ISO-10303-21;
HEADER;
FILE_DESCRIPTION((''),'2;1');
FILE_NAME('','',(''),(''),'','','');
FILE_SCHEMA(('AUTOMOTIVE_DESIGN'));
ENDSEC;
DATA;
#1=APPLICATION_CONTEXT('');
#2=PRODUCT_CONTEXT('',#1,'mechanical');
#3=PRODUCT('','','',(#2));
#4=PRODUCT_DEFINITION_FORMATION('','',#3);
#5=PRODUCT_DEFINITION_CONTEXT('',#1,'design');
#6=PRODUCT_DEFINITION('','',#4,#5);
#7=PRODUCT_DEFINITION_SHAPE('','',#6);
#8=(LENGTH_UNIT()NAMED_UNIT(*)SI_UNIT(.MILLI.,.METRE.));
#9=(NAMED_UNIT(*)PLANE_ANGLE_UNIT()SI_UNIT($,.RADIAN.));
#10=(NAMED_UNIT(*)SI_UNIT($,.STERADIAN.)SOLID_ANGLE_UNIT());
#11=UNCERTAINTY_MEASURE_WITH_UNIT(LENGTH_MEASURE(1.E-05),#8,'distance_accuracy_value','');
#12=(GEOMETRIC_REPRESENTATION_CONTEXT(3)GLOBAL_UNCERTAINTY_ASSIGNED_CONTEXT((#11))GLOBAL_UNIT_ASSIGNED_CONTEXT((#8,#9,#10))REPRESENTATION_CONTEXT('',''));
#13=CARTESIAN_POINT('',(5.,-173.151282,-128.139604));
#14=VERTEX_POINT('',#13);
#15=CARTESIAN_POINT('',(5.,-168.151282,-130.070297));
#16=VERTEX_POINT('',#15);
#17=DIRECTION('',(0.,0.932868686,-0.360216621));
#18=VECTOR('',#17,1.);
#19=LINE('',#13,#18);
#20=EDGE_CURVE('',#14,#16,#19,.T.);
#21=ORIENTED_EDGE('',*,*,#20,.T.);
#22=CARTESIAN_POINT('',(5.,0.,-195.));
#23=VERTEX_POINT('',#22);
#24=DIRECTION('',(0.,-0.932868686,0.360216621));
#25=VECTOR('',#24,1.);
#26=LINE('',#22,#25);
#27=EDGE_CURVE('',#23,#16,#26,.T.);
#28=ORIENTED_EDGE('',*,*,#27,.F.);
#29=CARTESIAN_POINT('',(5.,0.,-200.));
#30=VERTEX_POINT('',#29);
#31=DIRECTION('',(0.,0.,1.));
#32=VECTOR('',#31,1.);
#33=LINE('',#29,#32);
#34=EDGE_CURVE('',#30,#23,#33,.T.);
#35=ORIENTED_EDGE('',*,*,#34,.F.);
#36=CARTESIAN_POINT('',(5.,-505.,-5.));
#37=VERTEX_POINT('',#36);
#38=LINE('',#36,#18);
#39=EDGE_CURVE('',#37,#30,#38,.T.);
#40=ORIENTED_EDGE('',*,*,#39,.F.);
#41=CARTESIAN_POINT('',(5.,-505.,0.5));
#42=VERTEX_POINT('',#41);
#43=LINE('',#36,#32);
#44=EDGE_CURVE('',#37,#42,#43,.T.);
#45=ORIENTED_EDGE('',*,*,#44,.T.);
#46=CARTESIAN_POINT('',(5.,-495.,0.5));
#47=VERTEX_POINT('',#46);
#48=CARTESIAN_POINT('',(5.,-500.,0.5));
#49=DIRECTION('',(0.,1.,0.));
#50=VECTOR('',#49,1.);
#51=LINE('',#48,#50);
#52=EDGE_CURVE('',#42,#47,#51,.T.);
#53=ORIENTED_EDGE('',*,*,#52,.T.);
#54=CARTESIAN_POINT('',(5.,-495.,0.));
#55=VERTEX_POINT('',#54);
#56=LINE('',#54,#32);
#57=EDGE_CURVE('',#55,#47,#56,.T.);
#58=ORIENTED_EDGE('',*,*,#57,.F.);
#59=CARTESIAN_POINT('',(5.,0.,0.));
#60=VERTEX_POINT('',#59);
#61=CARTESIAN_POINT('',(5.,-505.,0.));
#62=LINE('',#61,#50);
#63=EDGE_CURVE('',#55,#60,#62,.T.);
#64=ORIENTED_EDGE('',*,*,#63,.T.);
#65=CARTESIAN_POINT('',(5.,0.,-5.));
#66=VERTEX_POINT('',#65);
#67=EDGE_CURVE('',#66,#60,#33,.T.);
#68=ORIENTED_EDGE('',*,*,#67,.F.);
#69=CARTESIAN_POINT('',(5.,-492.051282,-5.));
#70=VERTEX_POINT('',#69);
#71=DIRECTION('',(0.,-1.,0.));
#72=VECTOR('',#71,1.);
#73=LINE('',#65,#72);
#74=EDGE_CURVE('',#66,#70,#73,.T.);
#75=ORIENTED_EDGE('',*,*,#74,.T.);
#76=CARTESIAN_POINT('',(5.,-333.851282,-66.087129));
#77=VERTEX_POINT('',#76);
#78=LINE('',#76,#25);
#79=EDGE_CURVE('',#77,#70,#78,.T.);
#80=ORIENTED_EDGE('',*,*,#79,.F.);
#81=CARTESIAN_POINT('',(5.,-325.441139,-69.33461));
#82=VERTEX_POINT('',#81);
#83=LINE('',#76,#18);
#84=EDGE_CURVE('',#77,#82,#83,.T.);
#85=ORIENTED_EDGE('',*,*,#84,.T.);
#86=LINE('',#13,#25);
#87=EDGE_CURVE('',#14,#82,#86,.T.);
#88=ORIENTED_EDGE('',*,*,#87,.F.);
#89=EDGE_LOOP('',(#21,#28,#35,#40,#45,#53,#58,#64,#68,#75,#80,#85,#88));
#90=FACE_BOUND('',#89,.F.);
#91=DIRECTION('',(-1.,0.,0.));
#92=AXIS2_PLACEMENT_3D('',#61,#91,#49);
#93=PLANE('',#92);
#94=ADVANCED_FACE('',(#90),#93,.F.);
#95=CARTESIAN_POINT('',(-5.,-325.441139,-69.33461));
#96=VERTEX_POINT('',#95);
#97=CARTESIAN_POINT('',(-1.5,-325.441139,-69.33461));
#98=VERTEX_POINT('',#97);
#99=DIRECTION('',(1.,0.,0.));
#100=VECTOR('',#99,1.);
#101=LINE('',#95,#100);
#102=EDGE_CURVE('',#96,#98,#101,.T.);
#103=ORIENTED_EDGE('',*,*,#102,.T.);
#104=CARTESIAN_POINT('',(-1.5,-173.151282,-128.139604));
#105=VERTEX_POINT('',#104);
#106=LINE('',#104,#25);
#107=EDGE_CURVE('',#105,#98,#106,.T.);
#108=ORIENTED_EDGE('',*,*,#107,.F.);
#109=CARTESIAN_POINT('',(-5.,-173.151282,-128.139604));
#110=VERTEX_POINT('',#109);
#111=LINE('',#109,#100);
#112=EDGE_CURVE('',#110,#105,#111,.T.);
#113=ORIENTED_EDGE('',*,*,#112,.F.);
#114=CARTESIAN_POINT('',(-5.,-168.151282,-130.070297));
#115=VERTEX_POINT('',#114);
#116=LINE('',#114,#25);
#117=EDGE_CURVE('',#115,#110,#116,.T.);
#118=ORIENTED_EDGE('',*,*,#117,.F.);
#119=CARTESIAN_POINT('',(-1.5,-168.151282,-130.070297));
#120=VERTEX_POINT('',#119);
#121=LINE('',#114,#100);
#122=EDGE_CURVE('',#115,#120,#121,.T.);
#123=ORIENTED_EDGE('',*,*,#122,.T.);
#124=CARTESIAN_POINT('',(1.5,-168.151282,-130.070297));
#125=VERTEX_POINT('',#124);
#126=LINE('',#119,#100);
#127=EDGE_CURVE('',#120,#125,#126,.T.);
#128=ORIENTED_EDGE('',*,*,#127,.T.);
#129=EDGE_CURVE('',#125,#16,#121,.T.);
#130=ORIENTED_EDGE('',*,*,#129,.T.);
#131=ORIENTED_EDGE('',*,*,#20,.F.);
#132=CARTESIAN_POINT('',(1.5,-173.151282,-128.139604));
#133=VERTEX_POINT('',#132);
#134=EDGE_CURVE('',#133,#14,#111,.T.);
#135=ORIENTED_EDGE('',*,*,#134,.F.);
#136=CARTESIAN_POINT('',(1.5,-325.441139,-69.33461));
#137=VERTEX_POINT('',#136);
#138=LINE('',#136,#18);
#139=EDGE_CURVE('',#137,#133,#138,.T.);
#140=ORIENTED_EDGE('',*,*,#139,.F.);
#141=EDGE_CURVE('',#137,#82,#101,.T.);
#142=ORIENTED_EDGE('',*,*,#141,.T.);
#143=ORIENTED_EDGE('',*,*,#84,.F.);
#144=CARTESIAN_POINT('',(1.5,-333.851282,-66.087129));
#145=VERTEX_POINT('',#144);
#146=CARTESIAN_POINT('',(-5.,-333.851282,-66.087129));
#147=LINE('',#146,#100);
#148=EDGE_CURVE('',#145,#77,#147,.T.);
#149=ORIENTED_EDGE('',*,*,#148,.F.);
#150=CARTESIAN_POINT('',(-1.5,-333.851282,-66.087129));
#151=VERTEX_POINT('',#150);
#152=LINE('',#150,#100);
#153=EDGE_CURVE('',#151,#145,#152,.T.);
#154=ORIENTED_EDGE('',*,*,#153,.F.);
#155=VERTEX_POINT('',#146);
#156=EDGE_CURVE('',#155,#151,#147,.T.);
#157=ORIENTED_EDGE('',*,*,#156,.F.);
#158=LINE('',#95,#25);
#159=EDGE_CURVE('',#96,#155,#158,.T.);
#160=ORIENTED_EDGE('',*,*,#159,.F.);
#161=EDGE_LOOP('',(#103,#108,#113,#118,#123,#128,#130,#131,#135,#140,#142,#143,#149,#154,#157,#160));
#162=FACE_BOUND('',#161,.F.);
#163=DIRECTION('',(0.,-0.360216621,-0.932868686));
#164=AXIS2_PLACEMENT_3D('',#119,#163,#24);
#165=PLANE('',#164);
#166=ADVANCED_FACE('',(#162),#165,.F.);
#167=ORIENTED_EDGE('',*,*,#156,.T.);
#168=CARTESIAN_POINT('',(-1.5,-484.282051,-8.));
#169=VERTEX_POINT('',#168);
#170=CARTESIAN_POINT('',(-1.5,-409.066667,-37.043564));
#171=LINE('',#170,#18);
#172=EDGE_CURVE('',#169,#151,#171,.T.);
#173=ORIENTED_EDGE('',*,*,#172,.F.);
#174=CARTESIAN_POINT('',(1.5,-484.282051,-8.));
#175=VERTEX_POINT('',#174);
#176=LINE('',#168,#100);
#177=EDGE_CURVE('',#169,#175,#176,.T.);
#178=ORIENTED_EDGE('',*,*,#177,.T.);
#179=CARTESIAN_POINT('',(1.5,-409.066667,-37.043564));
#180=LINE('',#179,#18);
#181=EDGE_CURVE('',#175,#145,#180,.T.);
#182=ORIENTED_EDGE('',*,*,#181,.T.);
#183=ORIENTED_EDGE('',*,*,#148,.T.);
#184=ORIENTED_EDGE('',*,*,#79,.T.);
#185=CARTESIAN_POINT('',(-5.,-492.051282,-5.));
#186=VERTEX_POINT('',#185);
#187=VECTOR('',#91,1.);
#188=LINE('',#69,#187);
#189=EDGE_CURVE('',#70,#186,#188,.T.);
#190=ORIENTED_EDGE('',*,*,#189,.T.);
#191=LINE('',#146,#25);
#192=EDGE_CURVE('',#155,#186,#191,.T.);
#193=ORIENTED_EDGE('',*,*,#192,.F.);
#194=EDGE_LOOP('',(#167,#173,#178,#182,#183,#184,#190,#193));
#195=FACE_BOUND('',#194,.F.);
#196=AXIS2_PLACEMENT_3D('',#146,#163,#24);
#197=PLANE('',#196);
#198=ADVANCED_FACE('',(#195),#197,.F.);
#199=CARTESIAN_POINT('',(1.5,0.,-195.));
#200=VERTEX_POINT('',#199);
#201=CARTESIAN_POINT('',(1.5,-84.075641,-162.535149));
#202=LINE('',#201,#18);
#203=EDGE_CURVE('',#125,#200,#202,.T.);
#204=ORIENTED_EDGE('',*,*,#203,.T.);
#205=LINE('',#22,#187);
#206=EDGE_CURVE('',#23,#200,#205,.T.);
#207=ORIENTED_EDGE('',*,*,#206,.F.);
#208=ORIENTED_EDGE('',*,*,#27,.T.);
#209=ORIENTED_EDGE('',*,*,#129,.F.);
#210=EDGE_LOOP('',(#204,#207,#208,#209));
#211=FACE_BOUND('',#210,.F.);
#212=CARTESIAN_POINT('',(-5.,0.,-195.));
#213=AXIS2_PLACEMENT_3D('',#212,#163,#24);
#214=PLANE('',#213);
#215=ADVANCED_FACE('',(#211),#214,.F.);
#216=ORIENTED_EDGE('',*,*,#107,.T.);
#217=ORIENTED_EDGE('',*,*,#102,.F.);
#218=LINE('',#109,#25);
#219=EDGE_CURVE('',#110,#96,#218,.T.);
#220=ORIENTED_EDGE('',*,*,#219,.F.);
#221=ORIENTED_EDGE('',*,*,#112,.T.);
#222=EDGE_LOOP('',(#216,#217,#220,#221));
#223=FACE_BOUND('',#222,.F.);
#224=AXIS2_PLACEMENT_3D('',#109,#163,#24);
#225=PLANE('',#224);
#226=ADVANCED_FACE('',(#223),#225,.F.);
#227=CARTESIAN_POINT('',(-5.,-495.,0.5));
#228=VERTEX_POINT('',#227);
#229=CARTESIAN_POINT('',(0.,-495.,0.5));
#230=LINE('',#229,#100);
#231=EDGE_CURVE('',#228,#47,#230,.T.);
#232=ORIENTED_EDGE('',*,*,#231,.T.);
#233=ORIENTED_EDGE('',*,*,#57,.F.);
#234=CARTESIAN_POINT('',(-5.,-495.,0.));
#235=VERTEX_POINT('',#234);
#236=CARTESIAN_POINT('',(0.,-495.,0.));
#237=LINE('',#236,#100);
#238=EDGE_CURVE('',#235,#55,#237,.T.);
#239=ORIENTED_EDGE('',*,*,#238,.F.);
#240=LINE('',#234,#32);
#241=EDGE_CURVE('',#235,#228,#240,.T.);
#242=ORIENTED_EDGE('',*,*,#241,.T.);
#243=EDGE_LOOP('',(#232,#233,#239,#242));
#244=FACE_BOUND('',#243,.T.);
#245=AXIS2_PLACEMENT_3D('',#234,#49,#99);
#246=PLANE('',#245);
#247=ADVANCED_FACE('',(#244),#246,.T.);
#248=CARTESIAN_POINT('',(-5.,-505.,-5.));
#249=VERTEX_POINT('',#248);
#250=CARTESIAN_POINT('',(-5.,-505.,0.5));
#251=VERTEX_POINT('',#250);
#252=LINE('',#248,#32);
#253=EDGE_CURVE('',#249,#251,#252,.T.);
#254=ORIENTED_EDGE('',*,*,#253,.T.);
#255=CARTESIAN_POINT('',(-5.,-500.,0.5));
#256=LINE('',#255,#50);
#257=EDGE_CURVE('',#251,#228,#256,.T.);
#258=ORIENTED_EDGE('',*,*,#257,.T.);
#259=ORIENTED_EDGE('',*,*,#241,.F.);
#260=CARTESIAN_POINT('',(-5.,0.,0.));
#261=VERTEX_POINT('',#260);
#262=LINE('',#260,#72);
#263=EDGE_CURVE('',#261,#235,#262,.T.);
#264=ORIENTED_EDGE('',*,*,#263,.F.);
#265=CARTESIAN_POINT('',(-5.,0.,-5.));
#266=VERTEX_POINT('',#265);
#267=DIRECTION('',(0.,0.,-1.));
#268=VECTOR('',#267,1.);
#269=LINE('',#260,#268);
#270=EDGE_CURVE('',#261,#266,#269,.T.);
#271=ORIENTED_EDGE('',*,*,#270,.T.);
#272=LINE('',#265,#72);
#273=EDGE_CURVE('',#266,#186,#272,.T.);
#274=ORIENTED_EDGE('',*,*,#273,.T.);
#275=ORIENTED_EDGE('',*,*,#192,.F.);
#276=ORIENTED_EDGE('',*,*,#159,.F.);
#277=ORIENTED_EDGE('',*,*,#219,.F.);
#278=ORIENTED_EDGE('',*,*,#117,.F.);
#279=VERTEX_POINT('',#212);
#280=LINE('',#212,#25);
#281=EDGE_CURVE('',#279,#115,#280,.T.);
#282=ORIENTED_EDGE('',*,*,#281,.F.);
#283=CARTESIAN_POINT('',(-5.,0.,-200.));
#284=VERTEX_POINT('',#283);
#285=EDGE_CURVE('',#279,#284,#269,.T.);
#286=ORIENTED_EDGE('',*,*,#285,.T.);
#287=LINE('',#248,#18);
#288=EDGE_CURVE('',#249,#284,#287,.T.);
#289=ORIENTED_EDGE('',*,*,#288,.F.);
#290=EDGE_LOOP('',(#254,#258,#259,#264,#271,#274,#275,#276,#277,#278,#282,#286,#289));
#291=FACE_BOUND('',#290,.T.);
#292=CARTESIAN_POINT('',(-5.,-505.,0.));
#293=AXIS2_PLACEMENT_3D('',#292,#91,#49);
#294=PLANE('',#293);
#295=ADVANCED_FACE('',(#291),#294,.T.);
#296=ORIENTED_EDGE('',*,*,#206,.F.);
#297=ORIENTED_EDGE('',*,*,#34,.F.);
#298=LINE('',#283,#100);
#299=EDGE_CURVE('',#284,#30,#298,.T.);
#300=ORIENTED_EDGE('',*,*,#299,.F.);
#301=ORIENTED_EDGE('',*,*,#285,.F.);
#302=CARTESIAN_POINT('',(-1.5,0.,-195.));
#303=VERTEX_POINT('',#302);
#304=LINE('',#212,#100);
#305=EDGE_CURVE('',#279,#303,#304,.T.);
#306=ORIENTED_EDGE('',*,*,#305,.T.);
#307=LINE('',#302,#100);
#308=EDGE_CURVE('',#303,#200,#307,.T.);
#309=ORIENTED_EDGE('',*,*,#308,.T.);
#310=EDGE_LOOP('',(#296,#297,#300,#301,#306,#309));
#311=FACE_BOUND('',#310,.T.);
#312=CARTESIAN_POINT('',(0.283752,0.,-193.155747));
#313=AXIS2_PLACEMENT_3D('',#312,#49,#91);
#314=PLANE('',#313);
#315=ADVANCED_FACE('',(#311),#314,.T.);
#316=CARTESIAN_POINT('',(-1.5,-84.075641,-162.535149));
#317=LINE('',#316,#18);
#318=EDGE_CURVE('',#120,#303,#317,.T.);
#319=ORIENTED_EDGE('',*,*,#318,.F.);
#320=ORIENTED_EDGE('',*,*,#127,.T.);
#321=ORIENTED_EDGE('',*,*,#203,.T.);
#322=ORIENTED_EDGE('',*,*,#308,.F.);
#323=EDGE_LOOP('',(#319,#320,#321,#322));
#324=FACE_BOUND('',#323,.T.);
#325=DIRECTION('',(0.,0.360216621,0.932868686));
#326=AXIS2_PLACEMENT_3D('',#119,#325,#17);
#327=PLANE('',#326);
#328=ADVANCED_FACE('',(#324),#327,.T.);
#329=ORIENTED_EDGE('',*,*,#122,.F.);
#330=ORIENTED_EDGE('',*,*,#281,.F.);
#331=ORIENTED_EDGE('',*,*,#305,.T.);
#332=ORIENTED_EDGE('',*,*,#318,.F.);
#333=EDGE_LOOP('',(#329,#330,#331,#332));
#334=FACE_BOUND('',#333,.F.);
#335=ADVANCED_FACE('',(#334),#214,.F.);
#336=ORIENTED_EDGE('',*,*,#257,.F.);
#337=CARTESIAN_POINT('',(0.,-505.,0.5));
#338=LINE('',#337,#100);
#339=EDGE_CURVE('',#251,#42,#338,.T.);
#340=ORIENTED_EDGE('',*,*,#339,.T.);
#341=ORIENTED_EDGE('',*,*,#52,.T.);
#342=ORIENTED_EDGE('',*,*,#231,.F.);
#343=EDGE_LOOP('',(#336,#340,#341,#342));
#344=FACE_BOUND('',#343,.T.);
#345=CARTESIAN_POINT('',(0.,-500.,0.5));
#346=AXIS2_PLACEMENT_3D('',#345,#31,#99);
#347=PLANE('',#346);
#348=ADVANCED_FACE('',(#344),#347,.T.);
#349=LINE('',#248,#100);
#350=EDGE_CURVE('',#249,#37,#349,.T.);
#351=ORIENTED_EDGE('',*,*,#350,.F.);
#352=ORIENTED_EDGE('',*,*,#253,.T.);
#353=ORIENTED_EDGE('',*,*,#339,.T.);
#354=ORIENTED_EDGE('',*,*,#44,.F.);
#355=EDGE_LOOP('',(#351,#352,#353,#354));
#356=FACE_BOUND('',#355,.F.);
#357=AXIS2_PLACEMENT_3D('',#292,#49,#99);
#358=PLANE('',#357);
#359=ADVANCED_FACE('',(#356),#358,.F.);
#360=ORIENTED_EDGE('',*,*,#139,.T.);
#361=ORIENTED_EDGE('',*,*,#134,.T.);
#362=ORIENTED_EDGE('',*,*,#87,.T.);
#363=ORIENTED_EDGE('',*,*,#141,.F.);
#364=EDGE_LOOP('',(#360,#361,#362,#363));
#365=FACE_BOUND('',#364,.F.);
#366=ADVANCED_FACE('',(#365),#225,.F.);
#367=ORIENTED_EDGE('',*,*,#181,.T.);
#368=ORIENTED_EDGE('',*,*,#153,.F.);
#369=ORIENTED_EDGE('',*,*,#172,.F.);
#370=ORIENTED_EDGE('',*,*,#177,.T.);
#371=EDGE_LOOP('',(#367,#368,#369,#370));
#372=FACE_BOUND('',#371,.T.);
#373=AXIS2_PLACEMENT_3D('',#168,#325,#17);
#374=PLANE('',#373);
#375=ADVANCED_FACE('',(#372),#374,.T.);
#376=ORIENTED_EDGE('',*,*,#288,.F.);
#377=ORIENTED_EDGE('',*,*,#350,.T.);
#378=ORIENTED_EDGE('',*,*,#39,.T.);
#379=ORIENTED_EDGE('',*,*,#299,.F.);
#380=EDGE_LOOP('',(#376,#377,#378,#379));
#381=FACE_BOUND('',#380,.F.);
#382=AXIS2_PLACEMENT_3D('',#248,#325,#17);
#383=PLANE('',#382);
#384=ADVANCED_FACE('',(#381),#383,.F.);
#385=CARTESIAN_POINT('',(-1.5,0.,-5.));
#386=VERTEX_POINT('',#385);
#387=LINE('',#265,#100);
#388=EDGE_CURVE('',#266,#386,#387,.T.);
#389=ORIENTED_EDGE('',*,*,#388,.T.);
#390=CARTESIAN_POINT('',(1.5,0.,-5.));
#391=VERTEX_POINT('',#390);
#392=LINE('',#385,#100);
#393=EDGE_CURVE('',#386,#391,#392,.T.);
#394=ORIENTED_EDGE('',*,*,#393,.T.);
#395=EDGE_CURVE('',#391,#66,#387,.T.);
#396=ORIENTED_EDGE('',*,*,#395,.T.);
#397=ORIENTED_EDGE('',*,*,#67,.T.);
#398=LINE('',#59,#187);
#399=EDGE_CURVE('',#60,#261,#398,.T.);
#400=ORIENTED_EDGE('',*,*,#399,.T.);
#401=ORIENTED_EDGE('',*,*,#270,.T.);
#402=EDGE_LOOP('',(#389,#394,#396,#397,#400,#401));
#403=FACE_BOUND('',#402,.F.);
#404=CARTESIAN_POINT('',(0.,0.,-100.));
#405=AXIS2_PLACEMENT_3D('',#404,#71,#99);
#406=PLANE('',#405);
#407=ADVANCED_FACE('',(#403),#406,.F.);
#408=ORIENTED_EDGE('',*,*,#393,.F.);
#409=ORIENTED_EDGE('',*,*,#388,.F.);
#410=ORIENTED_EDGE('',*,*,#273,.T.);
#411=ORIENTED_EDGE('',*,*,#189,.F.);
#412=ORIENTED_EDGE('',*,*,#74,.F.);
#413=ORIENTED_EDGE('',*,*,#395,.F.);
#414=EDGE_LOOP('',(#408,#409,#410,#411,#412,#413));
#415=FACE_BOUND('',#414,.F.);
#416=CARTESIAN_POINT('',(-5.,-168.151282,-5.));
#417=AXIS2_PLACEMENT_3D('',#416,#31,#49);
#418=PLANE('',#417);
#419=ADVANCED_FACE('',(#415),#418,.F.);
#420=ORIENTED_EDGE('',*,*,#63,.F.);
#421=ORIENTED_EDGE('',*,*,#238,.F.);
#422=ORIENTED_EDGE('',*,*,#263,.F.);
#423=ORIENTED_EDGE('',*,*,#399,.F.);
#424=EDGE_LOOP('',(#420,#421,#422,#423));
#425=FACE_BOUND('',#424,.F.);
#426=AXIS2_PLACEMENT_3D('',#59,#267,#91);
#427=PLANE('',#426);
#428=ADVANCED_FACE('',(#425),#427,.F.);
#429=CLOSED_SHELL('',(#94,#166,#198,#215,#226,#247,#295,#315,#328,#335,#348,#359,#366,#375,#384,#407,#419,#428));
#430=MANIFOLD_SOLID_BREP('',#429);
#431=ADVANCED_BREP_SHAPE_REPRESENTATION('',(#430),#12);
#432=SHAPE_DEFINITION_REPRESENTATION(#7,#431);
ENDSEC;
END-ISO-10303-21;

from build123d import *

# Parameters (mm, degrees)
F1_DEPTH  = 505
F2_DEPTH  = 500.5
F4_DEPTH  = 10
F5_DEPTH  = 10
F7_DEPTH  = 3.5
F8_W      = 10
F8_H      = 10
F10_DEPTH = 0.5
F11_DEPTH = 3.5
F12_W     = 3
F12_H     = 158.2
F12_H_2   = 149.0364306936
F12_H_3   = 168.1512820513
F13_DEPTH = 3
F14_W     = 3
F14_H     = 180.2518238002
F14_H_2   = 163.2489754916
F14_H_3   = 161.2561033061
F15_DEPTH = 3
F16_DEPTH = 40
F17_W     = 5.5675039161
F17_H     = 3.688506484
F18_DEPTH = 25
F19_DEPTH = 25


with BuildPart() as f1:
    # F0 (on Front) → F1 (new body)
    with BuildSketch(Plane.XZ):
        Polygon((5, 0), (0, 0), (-5, 0), (-5, -200), (5, -200), align=None)
    extrude(amount=F1_DEPTH)

    # F0 (on Front) → F2 (join)
    with BuildSketch(Plane.XZ):
        Polygon((5, 0), (0, 0), (-5, 0), (-5, -200), (5, -200), align=None)
    extrude(amount=F2_DEPTH)

    # F3 (on face) → F4 (cut, through all)
    with BuildSketch(Plane(origin=(-5, 0, 0), x_dir=(0, -1, 0), z_dir=(-1, 0, 0))):
        Polygon((328.8512820513, -65.3208171387), (328.8512820513, -5), (179.8148513577, -5), align=None)
        Polygon((173.1512820513, -128.1396039604), (325.4411393395, -69.334609562), (173.1512820513, -7.6970046434), align=None)
        Polygon((168.1512820513, -5), (0, -5), (0, -195), (168.1512820513, -130.0702970297), align=None)
        Polygon((333.8512820513, -66.0871287129), (492.0512820513, -5), (333.8512820513, -5), align=None)
    extrude(amount=-F4_DEPTH, mode=Mode.SUBTRACT)

    # F3 (on face) → F5 (cut, through all)
    with BuildSketch(Plane(origin=(-5, 0, 0), x_dir=(0, -1, 0), z_dir=(-1, 0, 0))):
        Polygon((505, -200), (505, -5), (331.3512820513, -72.0524752475), (0, -200), align=None)
    extrude(amount=-F5_DEPTH, mode=Mode.SUBTRACT)

    # F6 (on face) → F7 (cut)
    with BuildSketch(Plane(origin=(-5, 0, 0), x_dir=(0, -1, 0), z_dir=(-1, 0, 0))):
        Polygon((179.8148513577, -5), (168.1512820513, -5), (168.1512820513, -130.0702970297), (173.1512820513, -128.1396039604), (173.1512820513, -7.6970046434), (325.4411393395, -69.334609562), (333.8512820513, -66.0871287129), (333.8512820513, -5), (328.8512820513, -5), (328.8512820513, -65.3208171387), align=None)
    extrude(amount=-F7_DEPTH, mode=Mode.SUBTRACT)

    # F8 (on face) → F10 (join)
    with BuildSketch(Plane.XY):
        with Locations((0, -500)):
            Rectangle(F8_W, F8_H)
    extrude(amount=F10_DEPTH)

    # F9 (on face) → F11 (cut)
    with BuildSketch(Plane.YZ.offset(5)):
        Polygon((-173.1512820513, -7.6970046434), (-173.1512820513, -128.1396039604), (-168.1512820513, -130.0702970297), (-168.1512820513, -5), (-179.8148513577, -5), (-328.8512820513, -65.3208171387), (-328.8512820513, -5), (-333.8512820513, -5), (-333.8512820513, -66.0871287129), (-325.4411393395, -69.334609562), align=None)
    extrude(amount=-F11_DEPTH, mode=Mode.SUBTRACT)

    # F12 (on face) → F13 (join)
    with BuildSketch(Plane(origin=(0, 0, -5), x_dir=(1, 0, 0), z_dir=(0, 0, -1))):
        with Locations((0, 412.9512820513)):
            Rectangle(F12_W, F12_H)
        with Locations((0, 254.3330667045)):
            Rectangle(F12_W, F12_H_2)
        with Locations((0, 84.0756410256)):
            Rectangle(F12_W, F12_H_3)
    extrude(amount=F13_DEPTH)

    # F14 (on face) → F15 (join)
    with BuildSketch(Plane(origin=(0, -65.5267872377, -169.6975772053), x_dir=(1, 0, 0), z_dir=(0, 0.3602166214, 0.9328686862))):
        with Locations((0, -19.8836707273)):
            Rectangle(F14_W, F14_H)
        with Locations((0, -196.9938815385)):
            Rectangle(F14_W, F14_H_2)
        with Locations((0, -368.2617762991)):
            Rectangle(F14_W, F14_H_3)
    extrude(amount=F15_DEPTH)

    # F16 (add): a face of the model
    f16_faces = [f1.faces().sort_by_distance(p)[0] for p in [
        (0, -167.6109571192, -128.6709940004),
    ]]
    extrude(f16_faces, amount=F16_DEPTH)

    # F17 (on face) → F18 (cut)
    with BuildSketch(Plane(origin=(0, 0, 0), x_dir=(-1, 0, 0), z_dir=(0, 1, 0))):
        with Locations((-0.283751958, -193.155746758)):
            Rectangle(F17_W, F17_H)
    extrude(amount=F18_DEPTH, mode=Mode.SUBTRACT)

    # F19 (cut): a face of the model
    f19_faces = [f1.faces().sort_by_distance(p)[0] for p in [
        (-1.5, -84.0756410256, -7.4725396089),
    ]]
    extrude(f19_faces, amount=-F19_DEPTH, mode=Mode.SUBTRACT)


solid = f1.part
